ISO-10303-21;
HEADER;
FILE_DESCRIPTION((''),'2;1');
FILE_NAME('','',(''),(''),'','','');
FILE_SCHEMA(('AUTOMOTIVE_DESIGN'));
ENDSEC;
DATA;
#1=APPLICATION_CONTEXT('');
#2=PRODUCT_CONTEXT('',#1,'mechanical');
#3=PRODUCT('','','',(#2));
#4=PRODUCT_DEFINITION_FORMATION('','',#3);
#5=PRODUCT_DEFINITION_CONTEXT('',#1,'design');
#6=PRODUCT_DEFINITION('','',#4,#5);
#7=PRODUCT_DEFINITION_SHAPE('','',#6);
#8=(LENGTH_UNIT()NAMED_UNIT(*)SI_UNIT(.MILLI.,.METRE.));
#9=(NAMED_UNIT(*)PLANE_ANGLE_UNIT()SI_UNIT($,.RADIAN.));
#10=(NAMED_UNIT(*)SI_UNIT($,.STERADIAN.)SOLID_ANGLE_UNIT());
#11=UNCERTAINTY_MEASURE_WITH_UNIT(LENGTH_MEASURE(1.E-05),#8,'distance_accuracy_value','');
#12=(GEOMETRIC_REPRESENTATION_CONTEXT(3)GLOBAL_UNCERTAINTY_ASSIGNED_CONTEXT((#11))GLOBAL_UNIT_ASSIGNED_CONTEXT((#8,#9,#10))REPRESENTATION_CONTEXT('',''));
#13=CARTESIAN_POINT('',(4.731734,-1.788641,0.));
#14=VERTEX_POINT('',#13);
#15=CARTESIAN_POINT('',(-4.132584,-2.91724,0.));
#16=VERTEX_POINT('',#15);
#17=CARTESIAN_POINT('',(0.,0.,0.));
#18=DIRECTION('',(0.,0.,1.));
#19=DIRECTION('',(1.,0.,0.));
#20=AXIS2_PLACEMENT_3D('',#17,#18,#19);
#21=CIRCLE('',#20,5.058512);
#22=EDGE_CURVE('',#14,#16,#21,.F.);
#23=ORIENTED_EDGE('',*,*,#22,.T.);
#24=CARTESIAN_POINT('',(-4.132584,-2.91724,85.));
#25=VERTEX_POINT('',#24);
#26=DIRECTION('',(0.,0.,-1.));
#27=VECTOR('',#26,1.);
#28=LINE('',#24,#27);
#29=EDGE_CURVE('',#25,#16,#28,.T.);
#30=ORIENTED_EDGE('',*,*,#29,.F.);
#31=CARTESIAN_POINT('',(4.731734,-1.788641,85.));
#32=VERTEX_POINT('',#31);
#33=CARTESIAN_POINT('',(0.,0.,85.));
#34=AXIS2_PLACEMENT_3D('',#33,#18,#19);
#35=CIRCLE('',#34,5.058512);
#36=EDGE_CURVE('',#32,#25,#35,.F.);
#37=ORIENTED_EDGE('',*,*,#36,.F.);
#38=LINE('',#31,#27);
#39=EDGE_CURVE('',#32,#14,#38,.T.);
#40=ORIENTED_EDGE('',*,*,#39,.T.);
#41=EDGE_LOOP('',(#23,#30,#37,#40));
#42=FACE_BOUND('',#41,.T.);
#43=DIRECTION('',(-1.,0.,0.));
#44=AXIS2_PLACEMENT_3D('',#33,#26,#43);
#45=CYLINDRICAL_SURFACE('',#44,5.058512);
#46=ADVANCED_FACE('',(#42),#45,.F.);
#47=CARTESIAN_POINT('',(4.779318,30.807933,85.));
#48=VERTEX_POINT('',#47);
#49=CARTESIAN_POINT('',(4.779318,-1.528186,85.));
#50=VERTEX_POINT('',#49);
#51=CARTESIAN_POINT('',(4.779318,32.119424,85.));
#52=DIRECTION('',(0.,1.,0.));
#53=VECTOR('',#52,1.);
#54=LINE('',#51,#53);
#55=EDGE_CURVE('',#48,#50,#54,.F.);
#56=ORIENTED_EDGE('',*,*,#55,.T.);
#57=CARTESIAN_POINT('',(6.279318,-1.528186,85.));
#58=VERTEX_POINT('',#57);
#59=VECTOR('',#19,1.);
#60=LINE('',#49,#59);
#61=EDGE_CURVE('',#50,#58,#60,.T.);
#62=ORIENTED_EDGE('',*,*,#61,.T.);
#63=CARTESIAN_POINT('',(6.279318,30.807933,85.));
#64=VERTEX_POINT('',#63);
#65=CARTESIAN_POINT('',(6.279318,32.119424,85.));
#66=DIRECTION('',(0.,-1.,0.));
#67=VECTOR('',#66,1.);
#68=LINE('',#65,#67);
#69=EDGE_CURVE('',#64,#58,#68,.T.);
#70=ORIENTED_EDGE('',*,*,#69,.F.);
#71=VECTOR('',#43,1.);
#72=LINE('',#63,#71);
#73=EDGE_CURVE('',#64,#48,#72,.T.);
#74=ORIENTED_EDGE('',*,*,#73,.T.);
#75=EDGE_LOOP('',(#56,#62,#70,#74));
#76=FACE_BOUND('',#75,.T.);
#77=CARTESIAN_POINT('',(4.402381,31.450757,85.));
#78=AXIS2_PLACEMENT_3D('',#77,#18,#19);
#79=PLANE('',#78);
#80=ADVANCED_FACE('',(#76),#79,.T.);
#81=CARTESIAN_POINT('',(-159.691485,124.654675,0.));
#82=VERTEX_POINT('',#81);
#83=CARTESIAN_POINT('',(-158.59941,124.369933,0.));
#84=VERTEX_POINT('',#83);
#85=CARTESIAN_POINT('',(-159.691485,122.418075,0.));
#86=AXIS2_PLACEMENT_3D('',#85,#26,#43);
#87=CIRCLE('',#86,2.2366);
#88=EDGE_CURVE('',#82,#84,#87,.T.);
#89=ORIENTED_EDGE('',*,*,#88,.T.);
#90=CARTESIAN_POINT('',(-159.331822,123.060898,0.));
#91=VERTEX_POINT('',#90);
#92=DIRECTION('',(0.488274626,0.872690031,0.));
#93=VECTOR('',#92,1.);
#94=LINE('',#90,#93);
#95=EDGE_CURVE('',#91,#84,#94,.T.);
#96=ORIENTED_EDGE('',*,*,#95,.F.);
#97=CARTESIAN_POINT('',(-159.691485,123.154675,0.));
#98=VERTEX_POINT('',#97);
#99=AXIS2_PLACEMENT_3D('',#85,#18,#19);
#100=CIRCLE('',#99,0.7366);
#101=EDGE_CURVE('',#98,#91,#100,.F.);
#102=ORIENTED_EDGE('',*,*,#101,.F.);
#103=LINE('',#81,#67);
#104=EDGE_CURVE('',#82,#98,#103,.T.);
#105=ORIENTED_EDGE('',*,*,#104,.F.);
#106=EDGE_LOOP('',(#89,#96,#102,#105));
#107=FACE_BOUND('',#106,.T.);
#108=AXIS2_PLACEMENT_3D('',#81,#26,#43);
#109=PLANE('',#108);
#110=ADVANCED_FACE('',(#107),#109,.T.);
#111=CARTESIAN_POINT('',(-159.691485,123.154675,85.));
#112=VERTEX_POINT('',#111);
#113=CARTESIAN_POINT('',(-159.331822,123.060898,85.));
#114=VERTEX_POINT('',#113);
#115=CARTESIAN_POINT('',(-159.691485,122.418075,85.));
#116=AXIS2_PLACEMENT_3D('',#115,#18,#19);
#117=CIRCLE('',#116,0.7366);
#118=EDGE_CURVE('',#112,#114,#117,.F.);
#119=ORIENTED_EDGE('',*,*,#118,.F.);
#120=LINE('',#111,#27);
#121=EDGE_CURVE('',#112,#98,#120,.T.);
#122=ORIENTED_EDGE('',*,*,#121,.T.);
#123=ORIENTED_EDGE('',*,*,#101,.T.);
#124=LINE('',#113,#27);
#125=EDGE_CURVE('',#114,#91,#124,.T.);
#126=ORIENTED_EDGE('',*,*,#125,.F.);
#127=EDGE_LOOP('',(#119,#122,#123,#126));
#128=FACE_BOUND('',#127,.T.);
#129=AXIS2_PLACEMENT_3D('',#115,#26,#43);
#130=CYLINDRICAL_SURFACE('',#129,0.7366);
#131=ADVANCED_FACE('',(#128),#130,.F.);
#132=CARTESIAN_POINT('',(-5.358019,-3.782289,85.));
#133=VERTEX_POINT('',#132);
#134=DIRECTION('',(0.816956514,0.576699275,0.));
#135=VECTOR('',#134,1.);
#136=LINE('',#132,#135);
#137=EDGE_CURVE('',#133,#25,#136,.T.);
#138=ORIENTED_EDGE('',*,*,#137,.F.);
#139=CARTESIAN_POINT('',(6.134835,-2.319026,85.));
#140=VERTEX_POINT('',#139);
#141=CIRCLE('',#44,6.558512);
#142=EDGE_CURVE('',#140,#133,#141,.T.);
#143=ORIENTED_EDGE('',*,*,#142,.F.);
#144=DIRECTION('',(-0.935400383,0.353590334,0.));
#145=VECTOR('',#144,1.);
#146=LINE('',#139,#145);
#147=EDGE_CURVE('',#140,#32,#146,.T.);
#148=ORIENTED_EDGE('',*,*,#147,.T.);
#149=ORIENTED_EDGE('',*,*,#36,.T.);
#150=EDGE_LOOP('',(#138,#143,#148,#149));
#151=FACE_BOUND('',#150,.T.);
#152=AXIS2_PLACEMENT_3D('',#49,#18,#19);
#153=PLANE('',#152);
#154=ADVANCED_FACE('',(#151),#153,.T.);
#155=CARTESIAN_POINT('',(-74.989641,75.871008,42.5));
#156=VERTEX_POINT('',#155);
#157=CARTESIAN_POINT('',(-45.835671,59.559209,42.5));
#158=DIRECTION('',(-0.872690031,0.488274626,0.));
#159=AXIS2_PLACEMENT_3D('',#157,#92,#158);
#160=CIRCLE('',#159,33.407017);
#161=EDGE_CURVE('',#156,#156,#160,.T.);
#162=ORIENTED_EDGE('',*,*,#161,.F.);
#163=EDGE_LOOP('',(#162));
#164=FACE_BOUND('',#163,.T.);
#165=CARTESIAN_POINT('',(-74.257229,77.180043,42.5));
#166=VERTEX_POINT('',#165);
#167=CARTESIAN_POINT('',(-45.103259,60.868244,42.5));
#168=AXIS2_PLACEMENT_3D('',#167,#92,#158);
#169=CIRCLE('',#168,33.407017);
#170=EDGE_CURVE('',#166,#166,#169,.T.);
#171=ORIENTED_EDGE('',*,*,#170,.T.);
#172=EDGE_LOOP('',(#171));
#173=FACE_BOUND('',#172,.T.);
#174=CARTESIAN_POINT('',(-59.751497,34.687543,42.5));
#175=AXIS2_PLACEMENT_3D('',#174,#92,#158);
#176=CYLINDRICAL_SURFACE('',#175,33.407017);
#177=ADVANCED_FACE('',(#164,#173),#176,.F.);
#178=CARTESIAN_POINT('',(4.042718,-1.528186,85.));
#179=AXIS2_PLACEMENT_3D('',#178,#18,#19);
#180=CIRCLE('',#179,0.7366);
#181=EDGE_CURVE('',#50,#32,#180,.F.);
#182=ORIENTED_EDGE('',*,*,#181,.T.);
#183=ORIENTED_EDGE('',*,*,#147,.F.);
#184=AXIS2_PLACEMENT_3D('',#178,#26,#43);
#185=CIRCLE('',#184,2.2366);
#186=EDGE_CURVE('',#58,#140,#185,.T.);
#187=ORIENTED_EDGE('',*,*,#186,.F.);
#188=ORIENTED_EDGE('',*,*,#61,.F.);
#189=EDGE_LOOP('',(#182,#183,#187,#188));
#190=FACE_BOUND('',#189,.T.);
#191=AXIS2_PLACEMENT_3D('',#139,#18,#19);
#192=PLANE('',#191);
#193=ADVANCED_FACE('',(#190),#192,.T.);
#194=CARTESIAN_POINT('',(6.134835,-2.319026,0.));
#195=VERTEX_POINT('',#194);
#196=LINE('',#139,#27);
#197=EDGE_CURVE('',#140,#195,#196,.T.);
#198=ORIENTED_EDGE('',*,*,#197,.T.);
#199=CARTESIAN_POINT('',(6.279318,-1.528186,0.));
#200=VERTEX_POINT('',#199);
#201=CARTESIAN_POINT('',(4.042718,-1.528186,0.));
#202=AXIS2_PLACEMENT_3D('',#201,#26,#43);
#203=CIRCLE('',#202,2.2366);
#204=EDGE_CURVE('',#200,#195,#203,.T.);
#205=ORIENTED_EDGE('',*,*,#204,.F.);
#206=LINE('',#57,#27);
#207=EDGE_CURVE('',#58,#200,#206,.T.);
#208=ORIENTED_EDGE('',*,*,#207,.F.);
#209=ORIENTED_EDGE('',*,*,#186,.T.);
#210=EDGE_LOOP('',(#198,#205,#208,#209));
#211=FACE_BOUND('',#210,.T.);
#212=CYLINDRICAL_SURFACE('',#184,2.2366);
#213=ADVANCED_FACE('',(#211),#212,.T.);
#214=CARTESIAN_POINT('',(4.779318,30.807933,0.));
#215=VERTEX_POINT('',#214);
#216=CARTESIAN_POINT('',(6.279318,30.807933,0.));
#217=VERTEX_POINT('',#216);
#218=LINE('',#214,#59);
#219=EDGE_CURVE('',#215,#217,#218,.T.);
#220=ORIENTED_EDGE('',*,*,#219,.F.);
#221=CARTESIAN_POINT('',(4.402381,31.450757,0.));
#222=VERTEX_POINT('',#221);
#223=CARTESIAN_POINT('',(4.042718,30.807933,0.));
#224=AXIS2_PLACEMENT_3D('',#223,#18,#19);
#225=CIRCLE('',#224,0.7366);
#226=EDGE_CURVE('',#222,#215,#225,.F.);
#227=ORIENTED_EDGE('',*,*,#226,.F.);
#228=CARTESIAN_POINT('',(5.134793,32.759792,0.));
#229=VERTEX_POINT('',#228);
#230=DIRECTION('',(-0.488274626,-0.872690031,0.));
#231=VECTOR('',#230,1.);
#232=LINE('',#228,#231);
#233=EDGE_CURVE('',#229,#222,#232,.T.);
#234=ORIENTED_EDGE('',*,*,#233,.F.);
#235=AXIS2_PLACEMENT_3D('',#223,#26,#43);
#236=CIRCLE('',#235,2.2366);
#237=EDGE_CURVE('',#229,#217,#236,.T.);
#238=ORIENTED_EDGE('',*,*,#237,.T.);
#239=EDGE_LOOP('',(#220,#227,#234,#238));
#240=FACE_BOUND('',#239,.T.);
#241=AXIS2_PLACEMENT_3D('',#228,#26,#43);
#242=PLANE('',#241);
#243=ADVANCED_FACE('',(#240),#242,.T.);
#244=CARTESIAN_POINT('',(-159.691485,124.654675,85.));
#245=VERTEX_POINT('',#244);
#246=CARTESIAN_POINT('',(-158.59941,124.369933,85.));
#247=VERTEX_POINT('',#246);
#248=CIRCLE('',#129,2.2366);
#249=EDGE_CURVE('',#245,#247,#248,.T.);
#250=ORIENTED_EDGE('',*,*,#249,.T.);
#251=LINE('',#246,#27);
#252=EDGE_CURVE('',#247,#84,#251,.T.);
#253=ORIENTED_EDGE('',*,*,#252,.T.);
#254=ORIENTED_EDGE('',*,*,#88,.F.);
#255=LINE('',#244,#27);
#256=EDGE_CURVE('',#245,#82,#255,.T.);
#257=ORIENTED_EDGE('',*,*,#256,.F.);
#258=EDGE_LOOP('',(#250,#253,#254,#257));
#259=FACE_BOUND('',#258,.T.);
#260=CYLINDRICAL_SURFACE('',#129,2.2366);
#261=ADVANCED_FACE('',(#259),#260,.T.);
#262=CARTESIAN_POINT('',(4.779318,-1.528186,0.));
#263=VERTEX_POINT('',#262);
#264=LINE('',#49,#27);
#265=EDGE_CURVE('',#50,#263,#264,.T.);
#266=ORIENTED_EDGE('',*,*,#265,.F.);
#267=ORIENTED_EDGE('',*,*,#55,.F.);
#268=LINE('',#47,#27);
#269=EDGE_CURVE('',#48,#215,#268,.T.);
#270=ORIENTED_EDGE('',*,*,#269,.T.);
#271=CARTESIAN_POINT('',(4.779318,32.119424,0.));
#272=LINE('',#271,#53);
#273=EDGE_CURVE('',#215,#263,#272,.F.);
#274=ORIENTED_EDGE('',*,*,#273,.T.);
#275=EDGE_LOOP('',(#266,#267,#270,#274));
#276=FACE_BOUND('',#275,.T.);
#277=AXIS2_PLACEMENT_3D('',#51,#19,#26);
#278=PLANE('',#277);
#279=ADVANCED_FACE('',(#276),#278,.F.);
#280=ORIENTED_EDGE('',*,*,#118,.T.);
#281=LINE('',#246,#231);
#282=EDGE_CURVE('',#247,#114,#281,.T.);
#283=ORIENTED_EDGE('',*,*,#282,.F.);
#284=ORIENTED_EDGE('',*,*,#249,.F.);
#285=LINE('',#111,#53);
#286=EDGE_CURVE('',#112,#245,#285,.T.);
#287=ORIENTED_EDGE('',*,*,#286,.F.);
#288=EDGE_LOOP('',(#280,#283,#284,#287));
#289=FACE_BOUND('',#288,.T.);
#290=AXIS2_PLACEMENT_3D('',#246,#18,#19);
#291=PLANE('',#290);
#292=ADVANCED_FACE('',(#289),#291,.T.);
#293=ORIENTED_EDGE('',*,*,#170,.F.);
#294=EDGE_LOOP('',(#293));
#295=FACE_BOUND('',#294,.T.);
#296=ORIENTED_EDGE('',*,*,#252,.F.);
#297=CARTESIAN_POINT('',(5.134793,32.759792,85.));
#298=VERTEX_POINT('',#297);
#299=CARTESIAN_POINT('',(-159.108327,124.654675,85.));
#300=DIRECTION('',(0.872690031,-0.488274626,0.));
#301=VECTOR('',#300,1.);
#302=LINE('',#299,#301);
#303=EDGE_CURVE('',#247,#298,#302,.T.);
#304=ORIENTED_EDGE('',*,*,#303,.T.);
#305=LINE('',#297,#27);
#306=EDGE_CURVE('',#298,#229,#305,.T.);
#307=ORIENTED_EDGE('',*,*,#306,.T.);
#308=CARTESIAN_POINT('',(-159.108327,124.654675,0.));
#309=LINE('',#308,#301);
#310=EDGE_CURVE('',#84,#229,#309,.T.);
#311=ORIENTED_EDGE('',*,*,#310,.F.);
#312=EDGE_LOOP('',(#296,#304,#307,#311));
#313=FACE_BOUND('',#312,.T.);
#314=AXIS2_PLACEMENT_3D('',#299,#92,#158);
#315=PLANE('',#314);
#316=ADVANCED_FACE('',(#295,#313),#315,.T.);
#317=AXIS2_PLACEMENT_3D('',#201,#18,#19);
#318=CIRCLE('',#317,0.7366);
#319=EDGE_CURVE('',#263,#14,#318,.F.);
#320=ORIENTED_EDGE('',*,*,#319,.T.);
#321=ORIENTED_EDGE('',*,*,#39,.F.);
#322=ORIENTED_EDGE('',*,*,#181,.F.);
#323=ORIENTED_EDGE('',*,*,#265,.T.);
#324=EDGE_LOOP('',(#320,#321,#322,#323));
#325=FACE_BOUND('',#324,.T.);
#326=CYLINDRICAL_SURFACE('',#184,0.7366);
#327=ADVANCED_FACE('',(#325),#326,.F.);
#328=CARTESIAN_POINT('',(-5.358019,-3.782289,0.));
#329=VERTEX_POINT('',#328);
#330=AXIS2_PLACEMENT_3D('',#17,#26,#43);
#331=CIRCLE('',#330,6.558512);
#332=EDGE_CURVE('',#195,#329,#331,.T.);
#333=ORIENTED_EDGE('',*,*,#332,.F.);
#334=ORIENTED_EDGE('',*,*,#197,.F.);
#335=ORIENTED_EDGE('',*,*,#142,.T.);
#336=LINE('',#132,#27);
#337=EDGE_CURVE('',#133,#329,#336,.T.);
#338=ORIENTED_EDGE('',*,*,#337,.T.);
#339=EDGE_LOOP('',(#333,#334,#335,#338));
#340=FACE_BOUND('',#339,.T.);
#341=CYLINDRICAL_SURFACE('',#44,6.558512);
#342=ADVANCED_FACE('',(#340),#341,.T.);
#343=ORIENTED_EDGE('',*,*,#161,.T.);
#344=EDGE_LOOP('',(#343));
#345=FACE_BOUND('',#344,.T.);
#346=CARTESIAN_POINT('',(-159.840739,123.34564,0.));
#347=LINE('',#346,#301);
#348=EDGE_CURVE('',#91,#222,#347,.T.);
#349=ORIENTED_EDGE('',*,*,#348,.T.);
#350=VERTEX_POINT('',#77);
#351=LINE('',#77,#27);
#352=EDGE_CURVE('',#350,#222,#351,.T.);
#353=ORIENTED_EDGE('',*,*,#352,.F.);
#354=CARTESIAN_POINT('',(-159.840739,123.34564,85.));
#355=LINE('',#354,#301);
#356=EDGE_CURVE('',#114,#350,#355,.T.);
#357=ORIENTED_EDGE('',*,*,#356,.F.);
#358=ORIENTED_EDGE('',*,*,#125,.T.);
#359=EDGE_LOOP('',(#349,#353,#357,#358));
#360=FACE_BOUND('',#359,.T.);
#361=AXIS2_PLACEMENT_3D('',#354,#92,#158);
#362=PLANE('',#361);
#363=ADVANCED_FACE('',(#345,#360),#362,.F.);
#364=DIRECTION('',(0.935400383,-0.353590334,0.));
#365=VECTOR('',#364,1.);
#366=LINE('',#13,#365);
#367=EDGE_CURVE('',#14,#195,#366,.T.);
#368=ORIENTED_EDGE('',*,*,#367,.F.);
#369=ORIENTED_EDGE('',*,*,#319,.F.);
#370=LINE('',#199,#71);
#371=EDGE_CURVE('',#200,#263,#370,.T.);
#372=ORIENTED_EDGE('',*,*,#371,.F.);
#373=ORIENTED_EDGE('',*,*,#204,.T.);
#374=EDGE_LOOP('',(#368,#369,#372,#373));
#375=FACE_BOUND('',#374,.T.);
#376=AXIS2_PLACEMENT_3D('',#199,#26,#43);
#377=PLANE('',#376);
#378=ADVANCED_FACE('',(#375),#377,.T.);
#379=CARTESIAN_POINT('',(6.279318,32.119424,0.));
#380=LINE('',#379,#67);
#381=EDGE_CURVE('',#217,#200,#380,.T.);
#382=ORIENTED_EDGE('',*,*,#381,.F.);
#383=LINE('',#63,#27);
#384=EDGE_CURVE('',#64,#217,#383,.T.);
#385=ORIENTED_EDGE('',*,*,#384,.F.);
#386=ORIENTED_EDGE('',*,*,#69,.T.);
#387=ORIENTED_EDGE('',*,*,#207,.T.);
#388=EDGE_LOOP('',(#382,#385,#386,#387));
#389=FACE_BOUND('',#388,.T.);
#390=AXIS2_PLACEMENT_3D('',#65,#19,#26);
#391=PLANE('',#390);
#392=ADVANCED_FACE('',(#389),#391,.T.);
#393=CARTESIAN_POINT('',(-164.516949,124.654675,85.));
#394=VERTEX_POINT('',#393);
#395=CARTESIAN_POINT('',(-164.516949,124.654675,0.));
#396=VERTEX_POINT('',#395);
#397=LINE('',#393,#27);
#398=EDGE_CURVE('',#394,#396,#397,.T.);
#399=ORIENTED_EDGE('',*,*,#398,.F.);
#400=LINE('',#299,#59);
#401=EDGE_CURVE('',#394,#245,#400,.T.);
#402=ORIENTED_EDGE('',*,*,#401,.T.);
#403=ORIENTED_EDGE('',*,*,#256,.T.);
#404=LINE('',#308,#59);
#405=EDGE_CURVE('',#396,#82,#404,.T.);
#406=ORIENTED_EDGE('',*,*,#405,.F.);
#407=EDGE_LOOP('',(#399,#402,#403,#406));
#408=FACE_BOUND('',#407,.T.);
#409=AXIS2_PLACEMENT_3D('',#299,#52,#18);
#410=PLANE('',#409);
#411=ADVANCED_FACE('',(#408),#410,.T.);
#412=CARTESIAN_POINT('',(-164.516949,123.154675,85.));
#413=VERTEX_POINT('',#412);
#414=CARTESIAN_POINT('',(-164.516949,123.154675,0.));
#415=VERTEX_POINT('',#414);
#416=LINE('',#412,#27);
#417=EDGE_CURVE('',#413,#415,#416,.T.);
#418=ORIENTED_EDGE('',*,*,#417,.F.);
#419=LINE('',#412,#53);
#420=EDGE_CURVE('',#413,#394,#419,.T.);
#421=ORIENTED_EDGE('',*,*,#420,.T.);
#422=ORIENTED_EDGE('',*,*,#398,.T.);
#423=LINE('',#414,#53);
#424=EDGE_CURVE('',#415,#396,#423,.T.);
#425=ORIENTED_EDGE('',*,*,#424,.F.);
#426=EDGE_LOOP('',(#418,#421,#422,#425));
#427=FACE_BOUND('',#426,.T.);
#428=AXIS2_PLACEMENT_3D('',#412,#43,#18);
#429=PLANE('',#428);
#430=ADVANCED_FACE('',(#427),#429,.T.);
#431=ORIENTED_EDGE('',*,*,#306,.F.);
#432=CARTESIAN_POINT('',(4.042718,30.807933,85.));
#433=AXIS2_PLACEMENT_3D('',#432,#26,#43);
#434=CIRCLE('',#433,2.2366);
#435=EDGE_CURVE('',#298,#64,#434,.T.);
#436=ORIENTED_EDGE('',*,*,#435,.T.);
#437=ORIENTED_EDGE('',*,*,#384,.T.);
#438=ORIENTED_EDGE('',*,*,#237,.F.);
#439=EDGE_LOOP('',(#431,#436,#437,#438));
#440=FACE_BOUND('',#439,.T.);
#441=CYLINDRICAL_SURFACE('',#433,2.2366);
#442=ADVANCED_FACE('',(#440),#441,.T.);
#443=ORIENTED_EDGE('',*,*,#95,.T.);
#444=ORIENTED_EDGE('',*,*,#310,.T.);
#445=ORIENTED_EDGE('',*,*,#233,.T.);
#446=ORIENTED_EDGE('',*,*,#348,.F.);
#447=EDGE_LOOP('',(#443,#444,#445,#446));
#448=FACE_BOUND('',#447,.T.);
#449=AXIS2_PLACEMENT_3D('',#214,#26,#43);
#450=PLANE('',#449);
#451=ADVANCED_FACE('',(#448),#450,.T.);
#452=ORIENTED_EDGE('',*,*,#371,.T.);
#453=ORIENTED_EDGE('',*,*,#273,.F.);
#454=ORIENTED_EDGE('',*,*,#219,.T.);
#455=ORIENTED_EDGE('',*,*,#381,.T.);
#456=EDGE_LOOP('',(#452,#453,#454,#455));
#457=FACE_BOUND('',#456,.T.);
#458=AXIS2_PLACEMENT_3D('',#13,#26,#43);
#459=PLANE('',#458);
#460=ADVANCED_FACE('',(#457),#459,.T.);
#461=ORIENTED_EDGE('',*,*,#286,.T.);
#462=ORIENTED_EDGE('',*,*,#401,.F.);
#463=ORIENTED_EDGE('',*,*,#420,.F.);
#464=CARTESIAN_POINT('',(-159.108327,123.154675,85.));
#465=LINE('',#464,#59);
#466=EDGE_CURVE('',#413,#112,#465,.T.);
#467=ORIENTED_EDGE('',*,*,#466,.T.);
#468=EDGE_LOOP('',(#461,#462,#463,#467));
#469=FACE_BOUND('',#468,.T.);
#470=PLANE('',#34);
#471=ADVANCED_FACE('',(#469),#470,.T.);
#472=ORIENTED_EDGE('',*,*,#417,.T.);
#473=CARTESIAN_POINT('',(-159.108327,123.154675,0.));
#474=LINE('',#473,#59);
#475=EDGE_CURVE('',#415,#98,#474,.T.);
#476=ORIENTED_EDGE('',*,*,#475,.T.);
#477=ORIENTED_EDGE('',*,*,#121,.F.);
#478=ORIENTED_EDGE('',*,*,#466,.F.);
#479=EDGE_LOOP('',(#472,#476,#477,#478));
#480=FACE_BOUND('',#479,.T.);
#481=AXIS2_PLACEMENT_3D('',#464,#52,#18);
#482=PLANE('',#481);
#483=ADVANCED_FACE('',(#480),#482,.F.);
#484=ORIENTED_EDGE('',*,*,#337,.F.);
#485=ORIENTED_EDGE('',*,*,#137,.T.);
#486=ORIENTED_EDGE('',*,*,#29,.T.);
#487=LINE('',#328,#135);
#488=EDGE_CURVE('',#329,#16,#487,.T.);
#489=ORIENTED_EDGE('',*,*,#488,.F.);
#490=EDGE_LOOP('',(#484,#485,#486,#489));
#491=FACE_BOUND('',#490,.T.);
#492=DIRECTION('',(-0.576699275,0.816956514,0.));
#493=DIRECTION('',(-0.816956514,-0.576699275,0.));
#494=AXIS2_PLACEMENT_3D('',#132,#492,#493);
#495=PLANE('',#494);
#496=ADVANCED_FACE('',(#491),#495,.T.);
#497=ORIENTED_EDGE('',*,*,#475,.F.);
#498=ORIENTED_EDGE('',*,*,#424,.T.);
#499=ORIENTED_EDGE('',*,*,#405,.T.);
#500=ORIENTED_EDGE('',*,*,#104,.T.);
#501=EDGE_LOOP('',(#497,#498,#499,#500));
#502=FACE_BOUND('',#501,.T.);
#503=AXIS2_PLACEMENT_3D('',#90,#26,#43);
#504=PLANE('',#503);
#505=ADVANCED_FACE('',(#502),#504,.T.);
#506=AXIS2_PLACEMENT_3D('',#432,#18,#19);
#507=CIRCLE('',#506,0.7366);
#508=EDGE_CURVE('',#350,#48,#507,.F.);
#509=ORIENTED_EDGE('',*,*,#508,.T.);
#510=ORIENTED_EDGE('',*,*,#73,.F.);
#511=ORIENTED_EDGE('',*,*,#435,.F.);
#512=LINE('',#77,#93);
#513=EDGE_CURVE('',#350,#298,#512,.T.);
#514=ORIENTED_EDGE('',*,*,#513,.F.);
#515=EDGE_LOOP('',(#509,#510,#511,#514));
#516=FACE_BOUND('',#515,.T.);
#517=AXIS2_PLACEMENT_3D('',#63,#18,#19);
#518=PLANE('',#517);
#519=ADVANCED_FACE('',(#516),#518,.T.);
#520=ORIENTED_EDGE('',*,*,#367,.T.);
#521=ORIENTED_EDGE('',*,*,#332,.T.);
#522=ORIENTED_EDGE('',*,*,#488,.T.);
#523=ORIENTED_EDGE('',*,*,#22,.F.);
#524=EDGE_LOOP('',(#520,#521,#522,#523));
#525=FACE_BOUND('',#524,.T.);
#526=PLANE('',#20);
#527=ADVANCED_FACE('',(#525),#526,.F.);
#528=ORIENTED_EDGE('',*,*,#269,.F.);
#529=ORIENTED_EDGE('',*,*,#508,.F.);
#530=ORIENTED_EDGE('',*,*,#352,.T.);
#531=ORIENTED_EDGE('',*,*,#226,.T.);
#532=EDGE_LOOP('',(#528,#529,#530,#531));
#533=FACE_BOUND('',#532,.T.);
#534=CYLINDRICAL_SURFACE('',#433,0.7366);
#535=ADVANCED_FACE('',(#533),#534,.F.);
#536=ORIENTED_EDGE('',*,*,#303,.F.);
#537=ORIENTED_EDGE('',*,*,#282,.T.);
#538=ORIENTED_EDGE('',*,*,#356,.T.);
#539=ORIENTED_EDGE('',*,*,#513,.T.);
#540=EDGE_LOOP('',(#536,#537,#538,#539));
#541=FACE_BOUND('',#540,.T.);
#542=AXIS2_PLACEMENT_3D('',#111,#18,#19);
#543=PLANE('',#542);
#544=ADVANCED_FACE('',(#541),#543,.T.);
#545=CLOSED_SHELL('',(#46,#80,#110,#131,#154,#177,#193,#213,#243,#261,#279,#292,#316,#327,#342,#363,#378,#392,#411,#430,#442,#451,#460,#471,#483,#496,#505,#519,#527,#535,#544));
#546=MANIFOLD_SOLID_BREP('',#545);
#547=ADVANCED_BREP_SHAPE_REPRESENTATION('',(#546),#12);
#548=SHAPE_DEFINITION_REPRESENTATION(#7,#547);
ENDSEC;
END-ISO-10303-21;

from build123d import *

# Parameters (mm, degrees)
BASE_FLANGE1_DEPTH = 85
SKETCH2_R          = 33.407017116
CUT_EXTRUDE1_DEPTH = 30


# Read off the part's stored shape, not the designer's step: Base-Flange1
with BuildPart() as part:
    # Base-Flange1 outline → Base-Flange1 (new body)
    with BuildSketch(Plane.XY):
        with BuildLine():
            ThreePointArc((4.779318239, -1.528186345), (4.767324577, -1.660569184), (4.731734161, -1.788640985))
            ThreePointArc((4.731734161, -1.788640985), (0.638889027, -5.018004141), (-4.132584418, -2.917240267))
            Line((-4.132584418, -2.917240267), (-5.358019189, -3.782289181))
            ThreePointArc((-5.358019189, -3.782289181), (0.828338715, -6.505992318), (6.134834735, -2.319026486))
            ThreePointArc((6.134834735, -2.319026486), (6.242900881, -1.930151397), (6.279318239, -1.528186345))
            Line((6.279318239, -1.528186345), (6.279318239, 30.807933335))
            ThreePointArc((6.279318239, 30.807933335), (5.972085307, 31.939269835), (5.134793267, 32.759791858))
            Line((5.134793267, 32.759791858), (-158.599410427, 124.369933097))
            ThreePointArc((-158.599410427, 124.369933097), (-159.127192628, 124.582318822), (-159.691485454, 124.654674574))
            Line((-159.691485454, 124.654674574), (-164.516949266, 124.654674574))
            Line((-164.516949266, 124.654674574), (-164.516949266, 123.154674574))
            Line((-164.516949266, 123.154674574), (-159.691485454, 123.154674574))
            ThreePointArc((-159.691485454, 123.154674574), (-159.50564172, 123.13084499), (-159.331822365, 123.060898051))
            Line((-159.331822365, 123.060898051), (4.402381329, 31.450756812))
            ThreePointArc((4.402381329, 31.450756812), (4.678134399, 31.180526765), (4.779318239, 30.807933335))
            Line((4.779318239, 30.807933335), (4.779318239, -1.528186345))
        make_face()
    extrude(amount=BASE_FLANGE1_DEPTH)

    # Sketch2 → Cut-Extrude1 (cut)
    with BuildSketch(Plane(origin=(15.183550365, 27.137459833, 0), x_dir=(0.872690030929894, -0.48827462550861755, 0), z_dir=(0.48827462550861755, 0.872690030929894, 0))):
        with Locations(Location((-69.081583233, -42.5, 0), (0, 0, 180))):
            Circle(SKETCH2_R)
    extrude(amount=-CUT_EXTRUDE1_DEPTH, mode=Mode.SUBTRACT)


solid = part.part
